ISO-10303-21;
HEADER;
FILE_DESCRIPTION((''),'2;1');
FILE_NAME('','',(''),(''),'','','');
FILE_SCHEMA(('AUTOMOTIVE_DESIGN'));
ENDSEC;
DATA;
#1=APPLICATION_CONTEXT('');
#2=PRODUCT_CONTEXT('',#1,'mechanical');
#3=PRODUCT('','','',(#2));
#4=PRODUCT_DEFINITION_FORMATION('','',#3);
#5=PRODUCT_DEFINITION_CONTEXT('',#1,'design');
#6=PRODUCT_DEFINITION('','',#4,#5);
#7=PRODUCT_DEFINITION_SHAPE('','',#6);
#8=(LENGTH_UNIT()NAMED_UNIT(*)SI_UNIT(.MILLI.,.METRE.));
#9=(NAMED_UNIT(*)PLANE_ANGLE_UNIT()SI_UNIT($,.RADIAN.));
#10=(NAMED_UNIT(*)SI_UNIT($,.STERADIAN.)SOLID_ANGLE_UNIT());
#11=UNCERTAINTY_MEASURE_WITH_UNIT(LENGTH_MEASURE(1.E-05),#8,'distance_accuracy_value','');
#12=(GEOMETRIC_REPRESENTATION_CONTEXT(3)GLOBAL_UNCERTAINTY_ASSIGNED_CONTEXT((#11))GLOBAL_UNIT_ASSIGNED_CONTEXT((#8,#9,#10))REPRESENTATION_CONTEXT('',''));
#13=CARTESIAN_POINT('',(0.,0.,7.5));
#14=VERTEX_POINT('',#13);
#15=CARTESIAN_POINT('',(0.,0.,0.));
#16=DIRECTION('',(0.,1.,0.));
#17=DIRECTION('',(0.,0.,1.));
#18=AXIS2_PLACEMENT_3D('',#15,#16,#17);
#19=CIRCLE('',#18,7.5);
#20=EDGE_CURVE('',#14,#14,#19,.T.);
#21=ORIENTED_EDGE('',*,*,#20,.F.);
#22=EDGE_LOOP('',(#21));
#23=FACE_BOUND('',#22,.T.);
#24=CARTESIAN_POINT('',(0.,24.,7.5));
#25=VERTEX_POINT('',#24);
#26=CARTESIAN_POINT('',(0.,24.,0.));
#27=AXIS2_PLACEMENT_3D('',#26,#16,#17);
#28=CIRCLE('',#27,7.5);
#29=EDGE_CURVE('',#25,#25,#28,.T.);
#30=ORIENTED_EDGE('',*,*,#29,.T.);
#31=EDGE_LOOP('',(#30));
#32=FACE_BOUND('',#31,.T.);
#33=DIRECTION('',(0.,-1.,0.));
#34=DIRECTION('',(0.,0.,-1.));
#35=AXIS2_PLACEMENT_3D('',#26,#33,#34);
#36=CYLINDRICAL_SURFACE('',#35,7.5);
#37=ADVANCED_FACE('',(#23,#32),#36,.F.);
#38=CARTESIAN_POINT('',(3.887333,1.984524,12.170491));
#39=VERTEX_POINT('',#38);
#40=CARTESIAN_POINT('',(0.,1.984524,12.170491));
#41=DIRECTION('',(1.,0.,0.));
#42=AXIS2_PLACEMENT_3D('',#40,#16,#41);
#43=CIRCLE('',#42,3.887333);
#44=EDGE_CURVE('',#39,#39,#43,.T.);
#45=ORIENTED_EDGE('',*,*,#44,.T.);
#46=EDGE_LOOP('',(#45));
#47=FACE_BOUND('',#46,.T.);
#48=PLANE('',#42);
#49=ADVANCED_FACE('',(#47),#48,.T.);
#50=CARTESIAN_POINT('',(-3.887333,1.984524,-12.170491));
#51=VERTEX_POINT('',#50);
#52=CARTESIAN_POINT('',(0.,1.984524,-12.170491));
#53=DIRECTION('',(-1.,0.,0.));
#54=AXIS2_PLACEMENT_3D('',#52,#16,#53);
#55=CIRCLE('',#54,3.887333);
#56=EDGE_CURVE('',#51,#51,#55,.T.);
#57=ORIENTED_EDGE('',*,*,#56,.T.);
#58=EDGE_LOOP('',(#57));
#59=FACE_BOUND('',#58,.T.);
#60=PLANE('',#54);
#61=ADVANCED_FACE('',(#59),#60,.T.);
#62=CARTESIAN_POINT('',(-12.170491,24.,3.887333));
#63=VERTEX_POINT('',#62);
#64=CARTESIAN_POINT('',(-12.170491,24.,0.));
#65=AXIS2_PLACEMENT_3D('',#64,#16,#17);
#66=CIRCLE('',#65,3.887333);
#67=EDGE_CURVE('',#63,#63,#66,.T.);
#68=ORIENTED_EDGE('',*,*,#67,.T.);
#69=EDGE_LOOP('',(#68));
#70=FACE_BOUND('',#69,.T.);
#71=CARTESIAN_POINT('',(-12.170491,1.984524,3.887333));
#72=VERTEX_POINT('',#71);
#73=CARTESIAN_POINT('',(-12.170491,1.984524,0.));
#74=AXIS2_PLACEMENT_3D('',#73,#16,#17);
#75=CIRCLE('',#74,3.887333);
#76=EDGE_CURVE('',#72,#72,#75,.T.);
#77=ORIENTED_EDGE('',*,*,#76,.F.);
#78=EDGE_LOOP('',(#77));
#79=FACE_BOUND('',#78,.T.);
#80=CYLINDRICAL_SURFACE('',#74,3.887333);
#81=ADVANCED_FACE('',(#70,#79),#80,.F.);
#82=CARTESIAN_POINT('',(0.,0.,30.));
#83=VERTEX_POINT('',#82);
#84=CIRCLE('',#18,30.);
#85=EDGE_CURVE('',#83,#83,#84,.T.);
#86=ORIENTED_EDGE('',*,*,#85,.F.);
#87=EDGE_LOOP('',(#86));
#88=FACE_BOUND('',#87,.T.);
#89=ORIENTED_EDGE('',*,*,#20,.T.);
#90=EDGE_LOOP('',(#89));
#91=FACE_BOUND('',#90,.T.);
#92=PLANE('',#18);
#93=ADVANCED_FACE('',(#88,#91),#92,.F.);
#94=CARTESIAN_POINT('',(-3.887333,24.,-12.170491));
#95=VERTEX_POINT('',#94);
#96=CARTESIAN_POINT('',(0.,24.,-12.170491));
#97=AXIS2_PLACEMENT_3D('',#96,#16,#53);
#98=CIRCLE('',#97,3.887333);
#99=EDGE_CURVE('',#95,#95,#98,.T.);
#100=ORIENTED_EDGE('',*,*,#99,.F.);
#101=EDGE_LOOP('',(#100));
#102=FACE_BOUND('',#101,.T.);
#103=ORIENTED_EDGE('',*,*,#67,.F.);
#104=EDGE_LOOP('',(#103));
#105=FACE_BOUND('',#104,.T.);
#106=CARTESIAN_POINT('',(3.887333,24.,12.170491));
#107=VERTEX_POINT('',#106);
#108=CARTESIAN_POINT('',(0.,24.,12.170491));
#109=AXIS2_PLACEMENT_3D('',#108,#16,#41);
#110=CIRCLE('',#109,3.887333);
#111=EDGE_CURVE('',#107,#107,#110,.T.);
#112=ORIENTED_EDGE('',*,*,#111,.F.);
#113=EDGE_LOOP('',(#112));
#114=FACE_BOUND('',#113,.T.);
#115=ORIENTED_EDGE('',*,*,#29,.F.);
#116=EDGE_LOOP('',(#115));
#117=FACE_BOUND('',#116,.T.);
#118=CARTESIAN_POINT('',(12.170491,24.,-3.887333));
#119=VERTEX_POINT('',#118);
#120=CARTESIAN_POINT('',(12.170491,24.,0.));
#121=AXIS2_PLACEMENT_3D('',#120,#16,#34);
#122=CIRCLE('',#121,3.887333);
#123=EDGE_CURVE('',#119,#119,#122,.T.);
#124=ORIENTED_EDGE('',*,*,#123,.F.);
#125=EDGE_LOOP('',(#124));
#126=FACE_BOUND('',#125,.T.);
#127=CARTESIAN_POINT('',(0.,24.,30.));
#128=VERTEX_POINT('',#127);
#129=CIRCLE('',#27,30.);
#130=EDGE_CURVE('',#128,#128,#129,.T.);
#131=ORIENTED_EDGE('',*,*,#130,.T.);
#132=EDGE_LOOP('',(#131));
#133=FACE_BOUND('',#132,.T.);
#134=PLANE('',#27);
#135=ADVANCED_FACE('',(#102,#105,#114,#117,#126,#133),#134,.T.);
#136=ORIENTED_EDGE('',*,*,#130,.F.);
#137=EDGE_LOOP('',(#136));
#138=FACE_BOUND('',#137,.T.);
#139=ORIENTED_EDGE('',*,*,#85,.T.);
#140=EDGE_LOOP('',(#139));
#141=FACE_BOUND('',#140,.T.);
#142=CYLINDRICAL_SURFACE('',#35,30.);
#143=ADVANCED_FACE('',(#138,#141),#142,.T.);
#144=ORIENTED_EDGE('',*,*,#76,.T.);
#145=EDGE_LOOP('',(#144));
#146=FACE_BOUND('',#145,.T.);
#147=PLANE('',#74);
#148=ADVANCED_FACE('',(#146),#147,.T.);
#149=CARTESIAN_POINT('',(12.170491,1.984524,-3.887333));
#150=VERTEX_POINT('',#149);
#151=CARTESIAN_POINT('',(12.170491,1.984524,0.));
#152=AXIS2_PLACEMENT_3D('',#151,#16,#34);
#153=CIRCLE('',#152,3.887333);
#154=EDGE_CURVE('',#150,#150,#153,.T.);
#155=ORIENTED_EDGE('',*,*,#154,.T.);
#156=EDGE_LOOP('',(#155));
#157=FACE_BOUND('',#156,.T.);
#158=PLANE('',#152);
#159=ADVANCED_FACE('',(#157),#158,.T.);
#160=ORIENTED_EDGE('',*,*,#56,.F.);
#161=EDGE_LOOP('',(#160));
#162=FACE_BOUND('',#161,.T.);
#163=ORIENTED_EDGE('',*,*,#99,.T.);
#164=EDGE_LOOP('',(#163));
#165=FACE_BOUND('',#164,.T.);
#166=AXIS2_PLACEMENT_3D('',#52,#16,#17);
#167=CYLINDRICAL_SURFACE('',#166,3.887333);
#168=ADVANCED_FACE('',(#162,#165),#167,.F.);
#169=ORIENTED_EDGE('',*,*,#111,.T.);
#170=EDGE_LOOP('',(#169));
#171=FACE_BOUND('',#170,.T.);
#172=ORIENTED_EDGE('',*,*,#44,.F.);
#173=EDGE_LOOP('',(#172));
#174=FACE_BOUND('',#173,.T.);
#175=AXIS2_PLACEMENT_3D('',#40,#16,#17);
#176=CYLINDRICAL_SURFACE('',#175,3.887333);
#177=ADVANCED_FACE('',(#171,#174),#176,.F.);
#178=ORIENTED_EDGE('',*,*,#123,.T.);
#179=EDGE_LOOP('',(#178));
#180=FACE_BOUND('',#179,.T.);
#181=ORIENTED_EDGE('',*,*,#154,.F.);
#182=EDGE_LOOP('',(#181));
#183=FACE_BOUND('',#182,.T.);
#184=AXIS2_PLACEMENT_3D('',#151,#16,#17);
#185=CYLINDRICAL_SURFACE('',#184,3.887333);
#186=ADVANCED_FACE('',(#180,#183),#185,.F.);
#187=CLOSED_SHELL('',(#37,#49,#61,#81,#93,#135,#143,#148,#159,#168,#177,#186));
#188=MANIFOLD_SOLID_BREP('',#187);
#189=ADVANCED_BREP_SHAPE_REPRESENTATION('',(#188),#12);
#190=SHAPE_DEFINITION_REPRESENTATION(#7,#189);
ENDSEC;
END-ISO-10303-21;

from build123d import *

# Parameters (mm, degrees)
SKETCH1_R           = 30
BOSS_EXTRUDE1_DEPTH = 24
SKETCH2_R           = 7.5
CUT_EXTRUDE1_DEPTH  = 49.744230428
SKETCH3_R           = 3.887332956
CUT_EXTRUDE2_DEPTH  = 22.015476488
CIRPATTERN1_COUNT   = 4


with BuildPart() as part:
    # Sketch1 → Boss-Extrude1 (new body)
    with BuildSketch(Plane(origin=(0, 0, 0), x_dir=(1, 0, 0), z_dir=(0, 1, 0))):
        Circle(SKETCH1_R)
    extrude(amount=BOSS_EXTRUDE1_DEPTH)

    # Sketch2 → Cut-Extrude1 (cut, through all)
    with BuildSketch(Plane(origin=(0, 0, 0), x_dir=(1, 0, 0), z_dir=(0, 1, 0))):
        Circle(SKETCH2_R)
    extrude(amount=CUT_EXTRUDE1_DEPTH, mode=Mode.SUBTRACT)

    # Sketch3 → Cut-Extrude2 (cut)
    with BuildSketch(Plane(origin=(0, 24, 0), x_dir=(1, 0, 0), z_dir=(0, 1, 0))):
        with Locations((-12.170491049, 0)):
            Circle(SKETCH3_R)
    cut_extrude2 = extrude(amount=-CUT_EXTRUDE2_DEPTH, mode=Mode.SUBTRACT)

    # CirPattern1: Cut-Extrude2 ×4 about axis
    cirpattern1_axis = Axis((0, 0, 0), (0, 1, 0))
    for i in range(1, CIRPATTERN1_COUNT):
        add(cut_extrude2.rotate(cirpattern1_axis, i * 360 / CIRPATTERN1_COUNT), mode=Mode.SUBTRACT)


solid = part.part
